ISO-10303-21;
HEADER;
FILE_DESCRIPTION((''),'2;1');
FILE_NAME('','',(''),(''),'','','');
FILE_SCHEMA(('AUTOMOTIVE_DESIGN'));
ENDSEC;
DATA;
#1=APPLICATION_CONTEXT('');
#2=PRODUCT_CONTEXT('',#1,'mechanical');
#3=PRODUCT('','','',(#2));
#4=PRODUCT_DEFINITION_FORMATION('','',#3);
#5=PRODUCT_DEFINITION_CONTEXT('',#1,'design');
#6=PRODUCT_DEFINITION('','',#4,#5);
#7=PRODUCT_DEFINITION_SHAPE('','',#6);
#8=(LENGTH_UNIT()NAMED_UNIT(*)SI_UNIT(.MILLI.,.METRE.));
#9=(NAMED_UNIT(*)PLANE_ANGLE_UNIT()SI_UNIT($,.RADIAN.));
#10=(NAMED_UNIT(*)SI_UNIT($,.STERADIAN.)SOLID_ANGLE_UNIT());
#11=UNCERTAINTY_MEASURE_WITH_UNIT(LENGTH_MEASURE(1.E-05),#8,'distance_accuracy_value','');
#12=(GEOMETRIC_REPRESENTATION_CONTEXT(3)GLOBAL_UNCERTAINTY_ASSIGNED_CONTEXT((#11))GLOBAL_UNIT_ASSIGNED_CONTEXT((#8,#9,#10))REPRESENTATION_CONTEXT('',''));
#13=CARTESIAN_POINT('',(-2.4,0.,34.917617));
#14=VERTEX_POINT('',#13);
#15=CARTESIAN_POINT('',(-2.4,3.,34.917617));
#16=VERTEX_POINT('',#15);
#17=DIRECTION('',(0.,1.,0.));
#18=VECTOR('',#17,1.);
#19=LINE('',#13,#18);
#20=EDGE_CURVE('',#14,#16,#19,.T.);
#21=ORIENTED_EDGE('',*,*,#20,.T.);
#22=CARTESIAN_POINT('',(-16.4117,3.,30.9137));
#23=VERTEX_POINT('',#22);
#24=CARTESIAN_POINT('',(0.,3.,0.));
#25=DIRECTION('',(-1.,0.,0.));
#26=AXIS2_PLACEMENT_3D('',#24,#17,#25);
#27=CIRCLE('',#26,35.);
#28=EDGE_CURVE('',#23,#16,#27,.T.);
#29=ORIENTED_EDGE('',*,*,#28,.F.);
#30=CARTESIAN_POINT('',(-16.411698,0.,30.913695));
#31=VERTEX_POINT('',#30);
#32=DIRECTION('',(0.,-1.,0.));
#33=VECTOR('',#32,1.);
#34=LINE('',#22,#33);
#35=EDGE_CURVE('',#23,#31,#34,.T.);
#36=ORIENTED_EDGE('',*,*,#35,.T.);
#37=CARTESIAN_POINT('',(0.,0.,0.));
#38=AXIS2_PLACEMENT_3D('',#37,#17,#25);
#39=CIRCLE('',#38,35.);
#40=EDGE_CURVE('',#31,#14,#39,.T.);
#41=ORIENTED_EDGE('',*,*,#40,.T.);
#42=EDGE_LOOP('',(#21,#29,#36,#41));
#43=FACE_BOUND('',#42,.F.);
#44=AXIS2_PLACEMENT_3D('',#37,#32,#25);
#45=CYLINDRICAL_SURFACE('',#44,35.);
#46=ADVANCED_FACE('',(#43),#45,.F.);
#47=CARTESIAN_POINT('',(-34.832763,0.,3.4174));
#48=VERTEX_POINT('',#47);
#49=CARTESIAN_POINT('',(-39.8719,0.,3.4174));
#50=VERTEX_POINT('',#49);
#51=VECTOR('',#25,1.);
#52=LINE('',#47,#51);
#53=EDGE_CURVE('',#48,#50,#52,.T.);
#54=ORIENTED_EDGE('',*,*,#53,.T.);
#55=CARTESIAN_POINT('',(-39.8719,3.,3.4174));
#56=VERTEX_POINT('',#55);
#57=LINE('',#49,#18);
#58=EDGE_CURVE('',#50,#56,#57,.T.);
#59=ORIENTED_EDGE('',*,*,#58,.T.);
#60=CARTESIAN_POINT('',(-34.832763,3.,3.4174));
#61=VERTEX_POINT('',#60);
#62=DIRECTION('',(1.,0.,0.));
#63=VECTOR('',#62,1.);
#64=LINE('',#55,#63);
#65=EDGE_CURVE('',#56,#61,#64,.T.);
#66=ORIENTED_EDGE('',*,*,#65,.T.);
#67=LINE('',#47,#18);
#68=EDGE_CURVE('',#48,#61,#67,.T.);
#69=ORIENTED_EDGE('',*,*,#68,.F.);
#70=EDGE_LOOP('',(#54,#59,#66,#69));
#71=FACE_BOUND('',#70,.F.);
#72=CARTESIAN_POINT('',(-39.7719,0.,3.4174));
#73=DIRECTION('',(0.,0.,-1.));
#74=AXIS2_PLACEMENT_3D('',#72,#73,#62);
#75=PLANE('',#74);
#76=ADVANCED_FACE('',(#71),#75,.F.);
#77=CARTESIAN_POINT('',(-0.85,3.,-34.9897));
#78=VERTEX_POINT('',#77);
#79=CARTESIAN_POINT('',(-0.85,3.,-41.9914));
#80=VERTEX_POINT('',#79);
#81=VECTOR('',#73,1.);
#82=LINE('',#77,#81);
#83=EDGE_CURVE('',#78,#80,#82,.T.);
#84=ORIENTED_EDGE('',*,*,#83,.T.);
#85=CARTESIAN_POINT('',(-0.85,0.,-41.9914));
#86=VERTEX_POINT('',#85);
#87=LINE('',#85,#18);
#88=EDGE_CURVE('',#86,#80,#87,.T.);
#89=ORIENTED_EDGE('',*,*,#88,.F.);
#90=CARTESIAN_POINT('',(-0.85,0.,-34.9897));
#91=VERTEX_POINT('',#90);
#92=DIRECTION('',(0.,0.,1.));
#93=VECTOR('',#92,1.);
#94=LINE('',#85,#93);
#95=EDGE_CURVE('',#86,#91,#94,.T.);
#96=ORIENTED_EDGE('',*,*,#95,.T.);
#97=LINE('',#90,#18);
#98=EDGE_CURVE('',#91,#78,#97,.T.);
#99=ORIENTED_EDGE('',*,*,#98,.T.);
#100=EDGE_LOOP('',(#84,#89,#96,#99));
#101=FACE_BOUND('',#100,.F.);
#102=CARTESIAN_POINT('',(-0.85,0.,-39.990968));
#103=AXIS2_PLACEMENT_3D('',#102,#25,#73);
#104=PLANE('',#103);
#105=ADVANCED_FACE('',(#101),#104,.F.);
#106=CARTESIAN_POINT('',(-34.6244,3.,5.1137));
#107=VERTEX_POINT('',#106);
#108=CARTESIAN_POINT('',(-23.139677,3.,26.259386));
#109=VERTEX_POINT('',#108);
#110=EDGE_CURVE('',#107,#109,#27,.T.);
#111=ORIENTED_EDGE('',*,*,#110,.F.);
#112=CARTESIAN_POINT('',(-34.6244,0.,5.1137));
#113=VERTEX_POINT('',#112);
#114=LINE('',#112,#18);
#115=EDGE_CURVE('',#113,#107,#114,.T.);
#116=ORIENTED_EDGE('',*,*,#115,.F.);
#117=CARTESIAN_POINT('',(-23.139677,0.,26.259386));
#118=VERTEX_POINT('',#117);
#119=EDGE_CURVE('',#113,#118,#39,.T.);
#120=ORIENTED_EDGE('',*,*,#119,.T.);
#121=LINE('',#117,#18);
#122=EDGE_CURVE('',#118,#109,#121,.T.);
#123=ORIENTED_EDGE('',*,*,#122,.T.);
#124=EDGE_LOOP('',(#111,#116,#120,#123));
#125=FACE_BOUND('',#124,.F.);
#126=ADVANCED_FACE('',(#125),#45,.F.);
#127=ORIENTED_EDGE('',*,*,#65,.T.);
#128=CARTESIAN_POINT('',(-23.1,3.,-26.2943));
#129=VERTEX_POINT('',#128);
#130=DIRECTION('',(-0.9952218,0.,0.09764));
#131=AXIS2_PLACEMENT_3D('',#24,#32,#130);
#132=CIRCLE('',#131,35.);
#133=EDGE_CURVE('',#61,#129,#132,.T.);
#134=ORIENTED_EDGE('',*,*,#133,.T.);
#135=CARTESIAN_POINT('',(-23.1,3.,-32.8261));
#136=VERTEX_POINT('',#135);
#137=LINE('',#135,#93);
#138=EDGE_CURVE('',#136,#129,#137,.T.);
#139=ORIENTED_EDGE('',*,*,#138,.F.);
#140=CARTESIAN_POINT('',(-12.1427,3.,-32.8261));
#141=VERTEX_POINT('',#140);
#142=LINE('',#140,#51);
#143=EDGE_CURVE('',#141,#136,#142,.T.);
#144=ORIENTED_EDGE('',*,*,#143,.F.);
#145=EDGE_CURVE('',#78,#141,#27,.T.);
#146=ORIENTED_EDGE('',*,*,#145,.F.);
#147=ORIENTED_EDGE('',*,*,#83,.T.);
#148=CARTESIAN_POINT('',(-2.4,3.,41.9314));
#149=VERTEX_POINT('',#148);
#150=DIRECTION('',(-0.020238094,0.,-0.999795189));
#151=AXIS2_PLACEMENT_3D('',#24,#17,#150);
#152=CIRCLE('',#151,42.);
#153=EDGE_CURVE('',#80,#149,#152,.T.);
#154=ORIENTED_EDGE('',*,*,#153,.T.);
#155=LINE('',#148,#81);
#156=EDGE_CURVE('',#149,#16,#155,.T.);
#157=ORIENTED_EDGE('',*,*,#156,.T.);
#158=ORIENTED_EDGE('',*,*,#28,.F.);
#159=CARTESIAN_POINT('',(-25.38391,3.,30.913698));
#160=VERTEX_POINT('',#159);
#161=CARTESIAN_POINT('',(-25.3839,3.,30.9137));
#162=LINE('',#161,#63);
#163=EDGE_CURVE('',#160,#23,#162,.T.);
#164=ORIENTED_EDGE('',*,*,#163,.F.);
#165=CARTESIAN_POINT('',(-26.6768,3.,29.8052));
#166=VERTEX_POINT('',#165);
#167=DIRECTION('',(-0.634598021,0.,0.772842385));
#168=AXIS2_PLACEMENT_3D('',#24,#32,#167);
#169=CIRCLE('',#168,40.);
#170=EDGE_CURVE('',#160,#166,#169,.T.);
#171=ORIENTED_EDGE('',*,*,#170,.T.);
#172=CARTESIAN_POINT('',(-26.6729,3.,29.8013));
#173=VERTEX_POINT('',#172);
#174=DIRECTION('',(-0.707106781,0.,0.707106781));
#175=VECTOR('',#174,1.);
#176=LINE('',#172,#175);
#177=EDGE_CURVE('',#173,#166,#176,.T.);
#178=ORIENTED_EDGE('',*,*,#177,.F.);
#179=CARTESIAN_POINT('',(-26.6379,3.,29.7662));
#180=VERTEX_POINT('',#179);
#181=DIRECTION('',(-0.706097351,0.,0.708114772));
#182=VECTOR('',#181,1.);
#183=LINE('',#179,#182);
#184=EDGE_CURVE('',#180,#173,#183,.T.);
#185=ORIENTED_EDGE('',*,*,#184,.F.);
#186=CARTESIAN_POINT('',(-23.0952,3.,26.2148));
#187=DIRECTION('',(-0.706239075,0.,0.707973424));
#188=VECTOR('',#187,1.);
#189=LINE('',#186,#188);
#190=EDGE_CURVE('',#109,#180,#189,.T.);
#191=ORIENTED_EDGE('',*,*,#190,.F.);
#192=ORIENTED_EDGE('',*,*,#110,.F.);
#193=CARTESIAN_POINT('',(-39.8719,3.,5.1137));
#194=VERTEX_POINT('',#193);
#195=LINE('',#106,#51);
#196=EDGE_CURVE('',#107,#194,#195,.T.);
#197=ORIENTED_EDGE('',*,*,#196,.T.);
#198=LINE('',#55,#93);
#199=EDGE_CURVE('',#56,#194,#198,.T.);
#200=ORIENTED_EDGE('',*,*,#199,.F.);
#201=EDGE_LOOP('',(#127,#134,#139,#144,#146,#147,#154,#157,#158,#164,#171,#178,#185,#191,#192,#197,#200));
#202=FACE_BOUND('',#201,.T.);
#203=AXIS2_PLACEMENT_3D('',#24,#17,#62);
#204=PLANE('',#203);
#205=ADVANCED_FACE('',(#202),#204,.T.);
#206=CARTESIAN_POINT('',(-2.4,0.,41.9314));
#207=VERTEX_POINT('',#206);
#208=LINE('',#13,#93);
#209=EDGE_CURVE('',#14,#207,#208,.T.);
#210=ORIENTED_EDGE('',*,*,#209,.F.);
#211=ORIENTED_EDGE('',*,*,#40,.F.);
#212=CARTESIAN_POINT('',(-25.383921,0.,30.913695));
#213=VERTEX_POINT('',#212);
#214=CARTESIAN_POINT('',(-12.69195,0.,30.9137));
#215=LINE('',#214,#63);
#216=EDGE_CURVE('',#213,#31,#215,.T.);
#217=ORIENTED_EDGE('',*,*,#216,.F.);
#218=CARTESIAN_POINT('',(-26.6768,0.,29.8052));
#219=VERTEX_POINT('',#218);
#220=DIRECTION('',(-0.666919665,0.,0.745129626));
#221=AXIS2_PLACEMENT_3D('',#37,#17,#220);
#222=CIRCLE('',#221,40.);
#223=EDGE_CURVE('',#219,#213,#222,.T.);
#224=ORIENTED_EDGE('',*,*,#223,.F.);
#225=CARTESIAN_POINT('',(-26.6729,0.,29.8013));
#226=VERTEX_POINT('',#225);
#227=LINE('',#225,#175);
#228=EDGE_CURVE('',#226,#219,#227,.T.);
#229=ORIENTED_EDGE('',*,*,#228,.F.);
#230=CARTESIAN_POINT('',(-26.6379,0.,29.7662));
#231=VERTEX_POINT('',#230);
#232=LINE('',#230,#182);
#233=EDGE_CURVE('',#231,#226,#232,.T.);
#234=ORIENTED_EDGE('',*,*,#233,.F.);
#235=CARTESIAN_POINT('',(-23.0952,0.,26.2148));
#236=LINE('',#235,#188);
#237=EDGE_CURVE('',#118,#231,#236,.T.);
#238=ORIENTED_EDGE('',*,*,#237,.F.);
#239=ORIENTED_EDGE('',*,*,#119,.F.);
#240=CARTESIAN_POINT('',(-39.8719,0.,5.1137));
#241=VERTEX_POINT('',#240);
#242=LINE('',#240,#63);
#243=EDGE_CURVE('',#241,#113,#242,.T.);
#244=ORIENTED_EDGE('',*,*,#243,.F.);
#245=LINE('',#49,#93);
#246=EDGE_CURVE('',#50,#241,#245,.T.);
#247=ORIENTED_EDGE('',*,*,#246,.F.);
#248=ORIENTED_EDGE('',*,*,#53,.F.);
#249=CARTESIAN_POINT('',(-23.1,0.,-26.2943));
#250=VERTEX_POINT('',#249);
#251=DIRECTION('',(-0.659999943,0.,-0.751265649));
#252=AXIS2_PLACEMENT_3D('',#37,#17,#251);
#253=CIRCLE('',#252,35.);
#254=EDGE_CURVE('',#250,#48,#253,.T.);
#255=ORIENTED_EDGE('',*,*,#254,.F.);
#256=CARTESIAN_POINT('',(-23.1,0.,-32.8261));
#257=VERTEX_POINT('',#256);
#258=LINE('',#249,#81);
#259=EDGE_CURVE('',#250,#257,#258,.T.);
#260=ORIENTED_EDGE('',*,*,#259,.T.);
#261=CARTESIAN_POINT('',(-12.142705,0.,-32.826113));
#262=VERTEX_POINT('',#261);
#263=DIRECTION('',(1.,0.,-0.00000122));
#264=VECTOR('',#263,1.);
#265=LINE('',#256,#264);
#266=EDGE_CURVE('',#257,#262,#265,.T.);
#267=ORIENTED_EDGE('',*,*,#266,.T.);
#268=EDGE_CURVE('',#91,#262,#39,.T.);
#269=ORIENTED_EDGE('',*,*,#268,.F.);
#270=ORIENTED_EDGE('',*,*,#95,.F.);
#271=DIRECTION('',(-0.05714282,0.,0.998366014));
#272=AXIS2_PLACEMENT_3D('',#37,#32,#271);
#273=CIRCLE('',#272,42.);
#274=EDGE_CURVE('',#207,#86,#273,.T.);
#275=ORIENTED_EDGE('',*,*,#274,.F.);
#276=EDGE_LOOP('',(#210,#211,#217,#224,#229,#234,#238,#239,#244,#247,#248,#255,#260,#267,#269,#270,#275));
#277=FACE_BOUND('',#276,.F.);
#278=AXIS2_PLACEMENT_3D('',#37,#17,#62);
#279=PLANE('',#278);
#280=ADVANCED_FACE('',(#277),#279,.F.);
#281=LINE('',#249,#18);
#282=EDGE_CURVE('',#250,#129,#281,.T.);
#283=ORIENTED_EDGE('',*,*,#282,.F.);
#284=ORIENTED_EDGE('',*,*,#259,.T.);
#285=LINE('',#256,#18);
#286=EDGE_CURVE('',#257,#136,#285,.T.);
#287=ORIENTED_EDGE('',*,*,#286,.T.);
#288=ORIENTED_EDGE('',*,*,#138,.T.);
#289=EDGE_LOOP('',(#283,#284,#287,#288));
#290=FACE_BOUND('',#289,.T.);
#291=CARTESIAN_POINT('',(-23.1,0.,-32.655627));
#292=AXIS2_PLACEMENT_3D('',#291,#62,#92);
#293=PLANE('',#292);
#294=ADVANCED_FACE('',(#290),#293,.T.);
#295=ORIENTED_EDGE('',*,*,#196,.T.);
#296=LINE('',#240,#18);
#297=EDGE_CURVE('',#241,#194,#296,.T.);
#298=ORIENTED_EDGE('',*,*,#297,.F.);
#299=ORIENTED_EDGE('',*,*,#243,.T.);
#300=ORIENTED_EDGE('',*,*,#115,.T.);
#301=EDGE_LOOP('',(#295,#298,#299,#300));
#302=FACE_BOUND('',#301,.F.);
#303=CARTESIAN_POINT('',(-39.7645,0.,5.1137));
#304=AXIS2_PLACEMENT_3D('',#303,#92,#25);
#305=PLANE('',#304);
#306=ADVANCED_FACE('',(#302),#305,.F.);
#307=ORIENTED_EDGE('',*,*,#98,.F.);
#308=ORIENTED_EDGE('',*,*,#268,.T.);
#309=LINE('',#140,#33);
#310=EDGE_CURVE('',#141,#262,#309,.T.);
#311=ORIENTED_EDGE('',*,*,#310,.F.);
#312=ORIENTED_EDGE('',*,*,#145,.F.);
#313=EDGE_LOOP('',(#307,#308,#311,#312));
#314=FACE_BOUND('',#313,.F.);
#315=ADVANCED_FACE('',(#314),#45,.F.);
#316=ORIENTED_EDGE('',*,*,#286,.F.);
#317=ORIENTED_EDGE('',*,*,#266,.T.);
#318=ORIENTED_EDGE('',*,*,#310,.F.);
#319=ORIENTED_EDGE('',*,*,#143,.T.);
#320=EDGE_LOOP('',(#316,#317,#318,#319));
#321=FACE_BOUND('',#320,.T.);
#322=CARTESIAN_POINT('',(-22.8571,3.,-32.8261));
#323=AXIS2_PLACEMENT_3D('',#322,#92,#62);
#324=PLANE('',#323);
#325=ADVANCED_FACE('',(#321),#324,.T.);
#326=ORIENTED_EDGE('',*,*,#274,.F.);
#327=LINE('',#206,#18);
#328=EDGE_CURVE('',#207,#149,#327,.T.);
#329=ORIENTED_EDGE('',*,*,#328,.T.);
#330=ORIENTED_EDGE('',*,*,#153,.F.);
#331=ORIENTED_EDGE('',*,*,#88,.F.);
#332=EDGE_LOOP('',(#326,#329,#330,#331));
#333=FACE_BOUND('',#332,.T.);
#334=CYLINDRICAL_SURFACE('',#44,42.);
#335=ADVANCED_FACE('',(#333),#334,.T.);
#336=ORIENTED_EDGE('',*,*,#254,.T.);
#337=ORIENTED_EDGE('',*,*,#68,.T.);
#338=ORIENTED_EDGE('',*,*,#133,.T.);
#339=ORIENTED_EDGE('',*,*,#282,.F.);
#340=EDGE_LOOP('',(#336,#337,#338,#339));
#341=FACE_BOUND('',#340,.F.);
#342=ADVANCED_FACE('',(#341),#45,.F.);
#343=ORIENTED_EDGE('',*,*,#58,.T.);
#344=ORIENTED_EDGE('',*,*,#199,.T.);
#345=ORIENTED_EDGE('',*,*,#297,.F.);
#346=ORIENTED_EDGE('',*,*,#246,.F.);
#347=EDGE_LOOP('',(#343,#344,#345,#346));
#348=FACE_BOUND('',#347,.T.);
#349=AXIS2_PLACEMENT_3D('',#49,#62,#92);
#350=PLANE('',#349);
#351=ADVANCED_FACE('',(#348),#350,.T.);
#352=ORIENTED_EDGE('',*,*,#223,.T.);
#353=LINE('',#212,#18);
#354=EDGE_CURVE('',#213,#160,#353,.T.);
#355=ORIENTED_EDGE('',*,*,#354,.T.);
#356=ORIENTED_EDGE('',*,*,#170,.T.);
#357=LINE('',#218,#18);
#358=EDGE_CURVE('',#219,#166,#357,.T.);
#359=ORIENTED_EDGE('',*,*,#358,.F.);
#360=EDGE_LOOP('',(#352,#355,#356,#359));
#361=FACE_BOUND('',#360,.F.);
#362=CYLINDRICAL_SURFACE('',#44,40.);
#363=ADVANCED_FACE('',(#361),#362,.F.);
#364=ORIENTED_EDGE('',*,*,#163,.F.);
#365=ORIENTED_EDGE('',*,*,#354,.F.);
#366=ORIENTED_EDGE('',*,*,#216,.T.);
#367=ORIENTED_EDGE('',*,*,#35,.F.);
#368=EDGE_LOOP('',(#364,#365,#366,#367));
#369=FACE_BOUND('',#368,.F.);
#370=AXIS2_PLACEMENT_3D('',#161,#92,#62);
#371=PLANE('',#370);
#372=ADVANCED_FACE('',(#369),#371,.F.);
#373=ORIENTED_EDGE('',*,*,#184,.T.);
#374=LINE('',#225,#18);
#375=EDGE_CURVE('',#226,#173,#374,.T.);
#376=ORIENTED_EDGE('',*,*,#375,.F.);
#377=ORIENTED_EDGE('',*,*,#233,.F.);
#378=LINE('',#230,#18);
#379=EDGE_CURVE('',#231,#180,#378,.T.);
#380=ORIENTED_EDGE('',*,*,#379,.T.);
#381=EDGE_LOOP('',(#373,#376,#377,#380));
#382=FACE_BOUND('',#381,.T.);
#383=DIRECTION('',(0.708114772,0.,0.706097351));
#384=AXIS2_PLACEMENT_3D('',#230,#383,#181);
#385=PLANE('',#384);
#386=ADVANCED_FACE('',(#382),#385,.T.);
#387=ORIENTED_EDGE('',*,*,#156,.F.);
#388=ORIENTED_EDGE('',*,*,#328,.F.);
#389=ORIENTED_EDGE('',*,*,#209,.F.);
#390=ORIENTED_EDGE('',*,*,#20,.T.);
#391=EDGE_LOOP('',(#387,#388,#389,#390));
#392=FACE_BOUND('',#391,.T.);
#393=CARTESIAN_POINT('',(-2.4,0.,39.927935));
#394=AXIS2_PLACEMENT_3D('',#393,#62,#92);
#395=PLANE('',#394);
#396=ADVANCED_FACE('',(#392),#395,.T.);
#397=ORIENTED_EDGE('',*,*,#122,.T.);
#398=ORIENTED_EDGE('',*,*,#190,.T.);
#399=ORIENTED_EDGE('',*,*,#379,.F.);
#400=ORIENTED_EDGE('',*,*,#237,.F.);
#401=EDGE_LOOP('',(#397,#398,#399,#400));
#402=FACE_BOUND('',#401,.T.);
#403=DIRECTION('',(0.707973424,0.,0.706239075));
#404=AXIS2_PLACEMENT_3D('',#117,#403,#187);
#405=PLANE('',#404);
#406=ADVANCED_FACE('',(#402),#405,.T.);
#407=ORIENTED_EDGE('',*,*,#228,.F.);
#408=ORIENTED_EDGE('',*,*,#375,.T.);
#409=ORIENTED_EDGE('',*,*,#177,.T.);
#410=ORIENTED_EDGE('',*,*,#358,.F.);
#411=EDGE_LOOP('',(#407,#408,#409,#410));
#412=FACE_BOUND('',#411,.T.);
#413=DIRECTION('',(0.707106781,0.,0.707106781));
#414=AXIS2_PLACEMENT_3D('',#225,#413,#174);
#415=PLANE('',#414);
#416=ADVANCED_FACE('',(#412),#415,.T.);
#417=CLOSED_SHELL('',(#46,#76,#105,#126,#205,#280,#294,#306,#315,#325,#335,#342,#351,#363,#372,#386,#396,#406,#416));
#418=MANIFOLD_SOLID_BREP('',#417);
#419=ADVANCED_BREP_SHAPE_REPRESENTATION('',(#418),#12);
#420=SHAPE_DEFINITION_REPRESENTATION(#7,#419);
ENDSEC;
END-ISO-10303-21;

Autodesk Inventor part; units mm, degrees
ref_plane "YZ Plane" through (0, 0, 0) normal (1, 0, 0) x (0, 1, 0)
ref_plane "XZ Plane" through (0, 0, 0) normal (0, 1, 0) x (-1, 0, 0)
ref_plane "XY Plane" through (0, 0, 0) normal (0, 0, 1) x (1, 0, 0)
sketch "Sketch1" plane through (0, 0, 0) normal (0, 1, 0) x (-1, 0, 0)
  circle A0 centre (0, 0) radius 40 projected
  circle A1 centre (0, 0) radius 35 projected
  line L0 (2.3, 32.9859) -> (2.3, 40) projected
  line L1 (21.9637, 27.3435) -> (25.5064, 30.8949) projected
  line L2 (21.9637, 27.3435) -> (21.9123, 27.292)
  line L3 (26.5671, 29.8368) -> (23.0244, 26.2855) projected
  line L4 (26.5671, 29.8368) -> (26.6021, 29.8719)
  line L5 (25.4356, 30.9655) -> (21.8929, 27.4142)
  line L6 (21.8929, 27.4142) -> (21.8415, 27.3626)
  line L7 (21.8415, 27.3626) -> (21.8337, 27.3548)
  line L8 (23.0952, 26.2148) -> (26.6379, 29.7662)
  line L9 (26.6379, 29.7662) -> (26.6729, 29.8013)
  line L10 (26.6729, 29.8013) -> (26.6768, 29.8052)
  circle A2 centre (0, 0) radius 42
  line L11 (2.4, 32.9859) -> (2.4, 39.9955)
  line L12 (34.7391, 5.0137) -> (39.7719, 5.0137) projected
  line L13 (39.7719, 3.5174) -> (34.7391, 3.5174) projected
  line L14 (34.7391, 5.1137) -> (39.7645, 5.1137)
  line L15 (39.7719, 3.4174) -> (34.7391, 3.4174)
  line L16 (34.7391, 5.1137) -> (34.6244, 5.1137)
  line L17 (39.7719, 3.4174) -> (39.8538, 3.4174)
  line L18 (23, -32.7261) -> (23, -26.3818) projected
  line L19 (23.1, -32.7236) -> (23.1, -26.3856)
  line L20 (23.1, -26.3856) -> (23.1, -26.2943)
  line L21 (21.5, -32.7261) -> (21.5, -26.3818) projected
  line L22 (21.4, -32.723) -> (21.4, -26.3818)
  line L23 (21.4, -32.723) -> (21.4, -33.7941)
  line L24 (0.75, -35) -> (0.75, -40) projected
  line L25 (0.85, -35.0011) -> (0.85, -39.8733)
  line L26 (0.85, -35.0011) -> (0.85, -34.9897)
  line L27 (0.85, -39.8733) -> (0.85, -41.9914)
  line L28 (2.4, 39.9955) -> (2.4, 41.9314)
  line L29 (23, -32.7261) -> (21.5, -32.7261) projected
  line L30 (22.8571, -32.8261) -> (21.4, -32.8261)
  line L31 (23.1, -32.7236) -> (23.1, -32.8261)
  line L32 (22.8571, -32.8261) -> (23.1, -32.8261)
  line L33 (39.7719, 5.0137) -> (39.7719, 3.5174) projected
  line L34 (39.8719, 3.4174) -> (39.8719, 5.1137)
  line L35 (39.7645, 5.1137) -> (39.8719, 5.1137)
  line L36 (39.8719, 3.4174) -> (39.8538, 3.4174)
  point P0 (2.4, 34.9176)
  point P1 (25.3839, 30.9137)
  point P2 (23.1396, 26.2594)
  point P3 (39.6718, 5.1137)
  point P4 (34.8328, 3.4174)
  point P5 (23.1, -32.6556)
  point P6 (21.4, -27.6955)
  dimension "d0" = 0.1
  dimension "d1" = 0.1
  dimension "d2" = 2
  dimension "d3" = 0.1
  dimension "d4" = 0.1
  dimension "d5" = 0.1
  dimension "d6" = 0.1
  dimension "d7" = 0.1
  dimension "d8" = 0.1
  dimension "d13" = 0.1
  dimension "d16" = 0.1
extrude "Extrusion1" add sketch "Sketch1" along normal blind 3 contours A0 L19 L20 A1 L15 L17 | A0 L36 L34 L35 L14 L11 L28 A2 L27 L32 L31 L19 | L14 L16 A1 L8 L9 L10 A0 | A0 L27 L25 L26 A1 L22 L23 | L5 L6 L7 A1 L11 A0
sketch "Sketch2" plane through (0, 3, 0) normal (0, 1, 0) x (1, 0, 0)
  line L0 (-21.4, 33.7941) -> (-21.4, 27.6955) projected
  arc A0 (-0.85, 34.9897) -> (-21.4, 27.6955) centre (0, 0) ccw projected
  line L1 (-25.3839, -30.9137) -> (-16.4117, -30.9137)
  arc A1 (-21.8337, -27.3548) -> (-2.4, -34.9176) centre (0, 0) ccw projected
  line L2 (-21.8337, -27.3548) -> (-25.3839, -30.9137) projected
  line L3 (-23.1, 32.8261) -> (-12.1427, 32.8261)
  point P0 (-9.1082, 33.7941)
  point P1 (-21.4, 32.8261)
extrude "Extrusion2" cut sketch "Sketch2" against normal through all
sketch "Sketch3" plane through (0, 3, 0) normal (0, 1, 0) x (1, 0, 0)
  line L0 (-21.4, 33.7941) -> (-21.4, 32.8261) projected
  line L1 (-22.8571, 32.8261) -> (-21.4, 32.8261)
  arc A0 (-21.4, 33.7941) -> (-22.8571, 32.8261) centre (0, 0) ccw projected
extrude "Extrusion3" add sketch "Sketch3" against normal blind 3
equation "\"d0\" = slack"
equation "\"d1\" = slack"
equation "\"d3\" = slack"
equation "\"d4\" = slack"
equation "\"d5\" = slack"
equation "\"d6\" = slack"
equation "\"d7\" = slack"
equation "\"d8\" = slack"
equation "\"d13\" = slack"
equation "\"d16\" = slack"
equation "\"d9\" = thicc"
equation "\"d14\" = thicc"
equation "\"slack\" = 0.1"
equation "\"thicc\" = 3"
properties part number "Front_aligner"
